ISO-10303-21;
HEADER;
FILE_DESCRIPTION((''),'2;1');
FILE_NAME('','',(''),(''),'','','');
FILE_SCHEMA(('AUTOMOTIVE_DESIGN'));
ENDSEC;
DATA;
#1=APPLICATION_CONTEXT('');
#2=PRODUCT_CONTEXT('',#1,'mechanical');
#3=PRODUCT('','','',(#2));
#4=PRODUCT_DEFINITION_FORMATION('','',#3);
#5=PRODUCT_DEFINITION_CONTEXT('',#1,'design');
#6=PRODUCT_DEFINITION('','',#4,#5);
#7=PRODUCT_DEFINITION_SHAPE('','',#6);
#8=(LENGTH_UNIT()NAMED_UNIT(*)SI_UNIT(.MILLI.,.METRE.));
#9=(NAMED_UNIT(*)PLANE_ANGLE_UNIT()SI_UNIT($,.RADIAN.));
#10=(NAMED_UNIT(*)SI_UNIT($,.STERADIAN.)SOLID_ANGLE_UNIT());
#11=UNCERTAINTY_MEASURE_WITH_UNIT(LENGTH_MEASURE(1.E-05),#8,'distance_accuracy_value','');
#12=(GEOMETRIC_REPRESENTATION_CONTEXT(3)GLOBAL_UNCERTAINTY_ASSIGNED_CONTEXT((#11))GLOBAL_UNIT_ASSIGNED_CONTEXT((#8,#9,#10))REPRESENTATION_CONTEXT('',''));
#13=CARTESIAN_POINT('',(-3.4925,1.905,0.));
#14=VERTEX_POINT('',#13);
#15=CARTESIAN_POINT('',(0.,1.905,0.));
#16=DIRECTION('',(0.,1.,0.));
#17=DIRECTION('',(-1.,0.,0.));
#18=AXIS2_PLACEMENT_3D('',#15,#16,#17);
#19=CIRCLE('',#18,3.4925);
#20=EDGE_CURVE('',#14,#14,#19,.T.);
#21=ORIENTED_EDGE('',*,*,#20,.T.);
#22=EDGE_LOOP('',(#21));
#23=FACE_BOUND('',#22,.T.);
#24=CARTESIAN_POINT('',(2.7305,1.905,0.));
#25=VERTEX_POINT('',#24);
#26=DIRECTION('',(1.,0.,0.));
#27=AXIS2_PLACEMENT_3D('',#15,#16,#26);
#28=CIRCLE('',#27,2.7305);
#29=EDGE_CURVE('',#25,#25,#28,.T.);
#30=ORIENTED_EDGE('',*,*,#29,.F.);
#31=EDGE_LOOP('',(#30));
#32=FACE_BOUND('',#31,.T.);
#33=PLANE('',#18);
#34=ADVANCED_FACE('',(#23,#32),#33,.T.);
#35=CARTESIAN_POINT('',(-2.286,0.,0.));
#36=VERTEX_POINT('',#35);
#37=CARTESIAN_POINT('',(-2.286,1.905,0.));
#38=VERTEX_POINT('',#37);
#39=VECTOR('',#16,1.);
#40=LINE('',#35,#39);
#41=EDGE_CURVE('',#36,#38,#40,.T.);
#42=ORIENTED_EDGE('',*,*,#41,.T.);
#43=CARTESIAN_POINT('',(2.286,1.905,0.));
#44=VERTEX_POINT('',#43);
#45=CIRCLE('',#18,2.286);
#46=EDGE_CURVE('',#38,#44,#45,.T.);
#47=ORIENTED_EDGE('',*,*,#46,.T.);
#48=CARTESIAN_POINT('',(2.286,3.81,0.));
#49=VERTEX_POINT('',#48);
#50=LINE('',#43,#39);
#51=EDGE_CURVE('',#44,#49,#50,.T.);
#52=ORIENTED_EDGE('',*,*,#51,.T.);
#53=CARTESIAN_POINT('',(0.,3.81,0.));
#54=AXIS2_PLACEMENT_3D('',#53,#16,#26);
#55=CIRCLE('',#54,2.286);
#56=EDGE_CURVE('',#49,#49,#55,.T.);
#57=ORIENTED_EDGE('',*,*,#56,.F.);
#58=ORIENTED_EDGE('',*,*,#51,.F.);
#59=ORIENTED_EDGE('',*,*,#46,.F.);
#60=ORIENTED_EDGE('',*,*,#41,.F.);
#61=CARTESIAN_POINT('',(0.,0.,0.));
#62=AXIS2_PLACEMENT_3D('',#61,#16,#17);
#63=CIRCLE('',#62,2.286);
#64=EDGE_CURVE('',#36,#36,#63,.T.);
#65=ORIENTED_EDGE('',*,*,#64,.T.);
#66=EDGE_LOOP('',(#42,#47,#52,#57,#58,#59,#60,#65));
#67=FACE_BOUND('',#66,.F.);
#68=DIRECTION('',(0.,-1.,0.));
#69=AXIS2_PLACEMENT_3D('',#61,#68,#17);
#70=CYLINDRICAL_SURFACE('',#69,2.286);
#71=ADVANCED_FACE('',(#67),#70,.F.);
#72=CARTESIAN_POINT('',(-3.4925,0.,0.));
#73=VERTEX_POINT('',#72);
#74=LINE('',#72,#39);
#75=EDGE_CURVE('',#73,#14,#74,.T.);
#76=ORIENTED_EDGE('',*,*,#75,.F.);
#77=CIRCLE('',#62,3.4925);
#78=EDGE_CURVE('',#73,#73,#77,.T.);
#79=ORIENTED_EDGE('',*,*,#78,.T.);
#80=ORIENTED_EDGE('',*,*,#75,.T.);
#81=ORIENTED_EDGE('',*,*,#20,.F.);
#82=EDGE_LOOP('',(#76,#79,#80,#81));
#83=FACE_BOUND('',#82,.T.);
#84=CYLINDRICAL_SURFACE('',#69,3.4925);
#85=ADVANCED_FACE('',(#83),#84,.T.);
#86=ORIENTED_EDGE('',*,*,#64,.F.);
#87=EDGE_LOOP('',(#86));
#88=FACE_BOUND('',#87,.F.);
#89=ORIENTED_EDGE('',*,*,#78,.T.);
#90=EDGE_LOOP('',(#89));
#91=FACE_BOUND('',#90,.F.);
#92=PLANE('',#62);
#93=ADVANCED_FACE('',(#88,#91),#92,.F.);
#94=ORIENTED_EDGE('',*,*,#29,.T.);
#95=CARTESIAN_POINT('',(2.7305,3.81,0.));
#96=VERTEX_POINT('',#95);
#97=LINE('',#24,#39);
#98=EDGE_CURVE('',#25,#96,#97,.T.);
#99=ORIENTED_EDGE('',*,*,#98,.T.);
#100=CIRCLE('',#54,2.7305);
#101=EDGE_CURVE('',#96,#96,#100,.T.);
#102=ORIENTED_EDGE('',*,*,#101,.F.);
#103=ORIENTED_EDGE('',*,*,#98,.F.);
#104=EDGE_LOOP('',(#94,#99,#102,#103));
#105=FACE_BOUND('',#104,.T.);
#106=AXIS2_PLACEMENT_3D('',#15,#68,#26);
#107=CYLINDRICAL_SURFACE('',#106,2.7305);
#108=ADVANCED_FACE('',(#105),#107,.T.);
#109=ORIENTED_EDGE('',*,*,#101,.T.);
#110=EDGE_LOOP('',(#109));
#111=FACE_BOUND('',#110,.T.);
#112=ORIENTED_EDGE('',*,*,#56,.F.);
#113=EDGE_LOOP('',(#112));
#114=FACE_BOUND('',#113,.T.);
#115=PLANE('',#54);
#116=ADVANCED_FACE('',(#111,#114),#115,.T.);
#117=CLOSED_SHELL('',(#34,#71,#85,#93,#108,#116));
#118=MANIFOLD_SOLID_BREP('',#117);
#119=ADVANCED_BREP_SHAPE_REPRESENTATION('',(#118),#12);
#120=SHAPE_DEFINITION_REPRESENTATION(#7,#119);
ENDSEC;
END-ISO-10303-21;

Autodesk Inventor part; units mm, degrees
ref_plane "YZ Plane" through (0, 0, 0) normal (1, 0, 0) x (0, 1, 0)
ref_plane "XZ Plane" through (0, 0, 0) normal (0, 1, 0) x (-1, 0, 0)
ref_plane "XY Plane" through (0, 0, 0) normal (0, 0, 1) x (1, 0, 0)
sketch "Sketch1" plane through (0, 0, 0) normal (0, 1, 0) x (-1, 0, 0)
  circle A0 centre (0, 0) radius 2.286
  circle A1 centre (0, 0) radius 3.4925
  dimension "d0" = 4.572
  dimension "d1" = 6.985
extrude "Extrusion1" add sketch "Sketch1" along normal blind 1.905
sketch "Sketch2" plane through (0, 1.905, 0) normal (0, 1, 0) x (1, 0, 0)
  circle A0 centre (0, 0) radius 2.286 projected
  circle A1 centre (0, 0) radius 2.7305
  dimension "d4" = 5.461
extrude "Extrusion2" add sketch "Sketch2" along normal blind 1.905
properties part number "Battery Spacer"
